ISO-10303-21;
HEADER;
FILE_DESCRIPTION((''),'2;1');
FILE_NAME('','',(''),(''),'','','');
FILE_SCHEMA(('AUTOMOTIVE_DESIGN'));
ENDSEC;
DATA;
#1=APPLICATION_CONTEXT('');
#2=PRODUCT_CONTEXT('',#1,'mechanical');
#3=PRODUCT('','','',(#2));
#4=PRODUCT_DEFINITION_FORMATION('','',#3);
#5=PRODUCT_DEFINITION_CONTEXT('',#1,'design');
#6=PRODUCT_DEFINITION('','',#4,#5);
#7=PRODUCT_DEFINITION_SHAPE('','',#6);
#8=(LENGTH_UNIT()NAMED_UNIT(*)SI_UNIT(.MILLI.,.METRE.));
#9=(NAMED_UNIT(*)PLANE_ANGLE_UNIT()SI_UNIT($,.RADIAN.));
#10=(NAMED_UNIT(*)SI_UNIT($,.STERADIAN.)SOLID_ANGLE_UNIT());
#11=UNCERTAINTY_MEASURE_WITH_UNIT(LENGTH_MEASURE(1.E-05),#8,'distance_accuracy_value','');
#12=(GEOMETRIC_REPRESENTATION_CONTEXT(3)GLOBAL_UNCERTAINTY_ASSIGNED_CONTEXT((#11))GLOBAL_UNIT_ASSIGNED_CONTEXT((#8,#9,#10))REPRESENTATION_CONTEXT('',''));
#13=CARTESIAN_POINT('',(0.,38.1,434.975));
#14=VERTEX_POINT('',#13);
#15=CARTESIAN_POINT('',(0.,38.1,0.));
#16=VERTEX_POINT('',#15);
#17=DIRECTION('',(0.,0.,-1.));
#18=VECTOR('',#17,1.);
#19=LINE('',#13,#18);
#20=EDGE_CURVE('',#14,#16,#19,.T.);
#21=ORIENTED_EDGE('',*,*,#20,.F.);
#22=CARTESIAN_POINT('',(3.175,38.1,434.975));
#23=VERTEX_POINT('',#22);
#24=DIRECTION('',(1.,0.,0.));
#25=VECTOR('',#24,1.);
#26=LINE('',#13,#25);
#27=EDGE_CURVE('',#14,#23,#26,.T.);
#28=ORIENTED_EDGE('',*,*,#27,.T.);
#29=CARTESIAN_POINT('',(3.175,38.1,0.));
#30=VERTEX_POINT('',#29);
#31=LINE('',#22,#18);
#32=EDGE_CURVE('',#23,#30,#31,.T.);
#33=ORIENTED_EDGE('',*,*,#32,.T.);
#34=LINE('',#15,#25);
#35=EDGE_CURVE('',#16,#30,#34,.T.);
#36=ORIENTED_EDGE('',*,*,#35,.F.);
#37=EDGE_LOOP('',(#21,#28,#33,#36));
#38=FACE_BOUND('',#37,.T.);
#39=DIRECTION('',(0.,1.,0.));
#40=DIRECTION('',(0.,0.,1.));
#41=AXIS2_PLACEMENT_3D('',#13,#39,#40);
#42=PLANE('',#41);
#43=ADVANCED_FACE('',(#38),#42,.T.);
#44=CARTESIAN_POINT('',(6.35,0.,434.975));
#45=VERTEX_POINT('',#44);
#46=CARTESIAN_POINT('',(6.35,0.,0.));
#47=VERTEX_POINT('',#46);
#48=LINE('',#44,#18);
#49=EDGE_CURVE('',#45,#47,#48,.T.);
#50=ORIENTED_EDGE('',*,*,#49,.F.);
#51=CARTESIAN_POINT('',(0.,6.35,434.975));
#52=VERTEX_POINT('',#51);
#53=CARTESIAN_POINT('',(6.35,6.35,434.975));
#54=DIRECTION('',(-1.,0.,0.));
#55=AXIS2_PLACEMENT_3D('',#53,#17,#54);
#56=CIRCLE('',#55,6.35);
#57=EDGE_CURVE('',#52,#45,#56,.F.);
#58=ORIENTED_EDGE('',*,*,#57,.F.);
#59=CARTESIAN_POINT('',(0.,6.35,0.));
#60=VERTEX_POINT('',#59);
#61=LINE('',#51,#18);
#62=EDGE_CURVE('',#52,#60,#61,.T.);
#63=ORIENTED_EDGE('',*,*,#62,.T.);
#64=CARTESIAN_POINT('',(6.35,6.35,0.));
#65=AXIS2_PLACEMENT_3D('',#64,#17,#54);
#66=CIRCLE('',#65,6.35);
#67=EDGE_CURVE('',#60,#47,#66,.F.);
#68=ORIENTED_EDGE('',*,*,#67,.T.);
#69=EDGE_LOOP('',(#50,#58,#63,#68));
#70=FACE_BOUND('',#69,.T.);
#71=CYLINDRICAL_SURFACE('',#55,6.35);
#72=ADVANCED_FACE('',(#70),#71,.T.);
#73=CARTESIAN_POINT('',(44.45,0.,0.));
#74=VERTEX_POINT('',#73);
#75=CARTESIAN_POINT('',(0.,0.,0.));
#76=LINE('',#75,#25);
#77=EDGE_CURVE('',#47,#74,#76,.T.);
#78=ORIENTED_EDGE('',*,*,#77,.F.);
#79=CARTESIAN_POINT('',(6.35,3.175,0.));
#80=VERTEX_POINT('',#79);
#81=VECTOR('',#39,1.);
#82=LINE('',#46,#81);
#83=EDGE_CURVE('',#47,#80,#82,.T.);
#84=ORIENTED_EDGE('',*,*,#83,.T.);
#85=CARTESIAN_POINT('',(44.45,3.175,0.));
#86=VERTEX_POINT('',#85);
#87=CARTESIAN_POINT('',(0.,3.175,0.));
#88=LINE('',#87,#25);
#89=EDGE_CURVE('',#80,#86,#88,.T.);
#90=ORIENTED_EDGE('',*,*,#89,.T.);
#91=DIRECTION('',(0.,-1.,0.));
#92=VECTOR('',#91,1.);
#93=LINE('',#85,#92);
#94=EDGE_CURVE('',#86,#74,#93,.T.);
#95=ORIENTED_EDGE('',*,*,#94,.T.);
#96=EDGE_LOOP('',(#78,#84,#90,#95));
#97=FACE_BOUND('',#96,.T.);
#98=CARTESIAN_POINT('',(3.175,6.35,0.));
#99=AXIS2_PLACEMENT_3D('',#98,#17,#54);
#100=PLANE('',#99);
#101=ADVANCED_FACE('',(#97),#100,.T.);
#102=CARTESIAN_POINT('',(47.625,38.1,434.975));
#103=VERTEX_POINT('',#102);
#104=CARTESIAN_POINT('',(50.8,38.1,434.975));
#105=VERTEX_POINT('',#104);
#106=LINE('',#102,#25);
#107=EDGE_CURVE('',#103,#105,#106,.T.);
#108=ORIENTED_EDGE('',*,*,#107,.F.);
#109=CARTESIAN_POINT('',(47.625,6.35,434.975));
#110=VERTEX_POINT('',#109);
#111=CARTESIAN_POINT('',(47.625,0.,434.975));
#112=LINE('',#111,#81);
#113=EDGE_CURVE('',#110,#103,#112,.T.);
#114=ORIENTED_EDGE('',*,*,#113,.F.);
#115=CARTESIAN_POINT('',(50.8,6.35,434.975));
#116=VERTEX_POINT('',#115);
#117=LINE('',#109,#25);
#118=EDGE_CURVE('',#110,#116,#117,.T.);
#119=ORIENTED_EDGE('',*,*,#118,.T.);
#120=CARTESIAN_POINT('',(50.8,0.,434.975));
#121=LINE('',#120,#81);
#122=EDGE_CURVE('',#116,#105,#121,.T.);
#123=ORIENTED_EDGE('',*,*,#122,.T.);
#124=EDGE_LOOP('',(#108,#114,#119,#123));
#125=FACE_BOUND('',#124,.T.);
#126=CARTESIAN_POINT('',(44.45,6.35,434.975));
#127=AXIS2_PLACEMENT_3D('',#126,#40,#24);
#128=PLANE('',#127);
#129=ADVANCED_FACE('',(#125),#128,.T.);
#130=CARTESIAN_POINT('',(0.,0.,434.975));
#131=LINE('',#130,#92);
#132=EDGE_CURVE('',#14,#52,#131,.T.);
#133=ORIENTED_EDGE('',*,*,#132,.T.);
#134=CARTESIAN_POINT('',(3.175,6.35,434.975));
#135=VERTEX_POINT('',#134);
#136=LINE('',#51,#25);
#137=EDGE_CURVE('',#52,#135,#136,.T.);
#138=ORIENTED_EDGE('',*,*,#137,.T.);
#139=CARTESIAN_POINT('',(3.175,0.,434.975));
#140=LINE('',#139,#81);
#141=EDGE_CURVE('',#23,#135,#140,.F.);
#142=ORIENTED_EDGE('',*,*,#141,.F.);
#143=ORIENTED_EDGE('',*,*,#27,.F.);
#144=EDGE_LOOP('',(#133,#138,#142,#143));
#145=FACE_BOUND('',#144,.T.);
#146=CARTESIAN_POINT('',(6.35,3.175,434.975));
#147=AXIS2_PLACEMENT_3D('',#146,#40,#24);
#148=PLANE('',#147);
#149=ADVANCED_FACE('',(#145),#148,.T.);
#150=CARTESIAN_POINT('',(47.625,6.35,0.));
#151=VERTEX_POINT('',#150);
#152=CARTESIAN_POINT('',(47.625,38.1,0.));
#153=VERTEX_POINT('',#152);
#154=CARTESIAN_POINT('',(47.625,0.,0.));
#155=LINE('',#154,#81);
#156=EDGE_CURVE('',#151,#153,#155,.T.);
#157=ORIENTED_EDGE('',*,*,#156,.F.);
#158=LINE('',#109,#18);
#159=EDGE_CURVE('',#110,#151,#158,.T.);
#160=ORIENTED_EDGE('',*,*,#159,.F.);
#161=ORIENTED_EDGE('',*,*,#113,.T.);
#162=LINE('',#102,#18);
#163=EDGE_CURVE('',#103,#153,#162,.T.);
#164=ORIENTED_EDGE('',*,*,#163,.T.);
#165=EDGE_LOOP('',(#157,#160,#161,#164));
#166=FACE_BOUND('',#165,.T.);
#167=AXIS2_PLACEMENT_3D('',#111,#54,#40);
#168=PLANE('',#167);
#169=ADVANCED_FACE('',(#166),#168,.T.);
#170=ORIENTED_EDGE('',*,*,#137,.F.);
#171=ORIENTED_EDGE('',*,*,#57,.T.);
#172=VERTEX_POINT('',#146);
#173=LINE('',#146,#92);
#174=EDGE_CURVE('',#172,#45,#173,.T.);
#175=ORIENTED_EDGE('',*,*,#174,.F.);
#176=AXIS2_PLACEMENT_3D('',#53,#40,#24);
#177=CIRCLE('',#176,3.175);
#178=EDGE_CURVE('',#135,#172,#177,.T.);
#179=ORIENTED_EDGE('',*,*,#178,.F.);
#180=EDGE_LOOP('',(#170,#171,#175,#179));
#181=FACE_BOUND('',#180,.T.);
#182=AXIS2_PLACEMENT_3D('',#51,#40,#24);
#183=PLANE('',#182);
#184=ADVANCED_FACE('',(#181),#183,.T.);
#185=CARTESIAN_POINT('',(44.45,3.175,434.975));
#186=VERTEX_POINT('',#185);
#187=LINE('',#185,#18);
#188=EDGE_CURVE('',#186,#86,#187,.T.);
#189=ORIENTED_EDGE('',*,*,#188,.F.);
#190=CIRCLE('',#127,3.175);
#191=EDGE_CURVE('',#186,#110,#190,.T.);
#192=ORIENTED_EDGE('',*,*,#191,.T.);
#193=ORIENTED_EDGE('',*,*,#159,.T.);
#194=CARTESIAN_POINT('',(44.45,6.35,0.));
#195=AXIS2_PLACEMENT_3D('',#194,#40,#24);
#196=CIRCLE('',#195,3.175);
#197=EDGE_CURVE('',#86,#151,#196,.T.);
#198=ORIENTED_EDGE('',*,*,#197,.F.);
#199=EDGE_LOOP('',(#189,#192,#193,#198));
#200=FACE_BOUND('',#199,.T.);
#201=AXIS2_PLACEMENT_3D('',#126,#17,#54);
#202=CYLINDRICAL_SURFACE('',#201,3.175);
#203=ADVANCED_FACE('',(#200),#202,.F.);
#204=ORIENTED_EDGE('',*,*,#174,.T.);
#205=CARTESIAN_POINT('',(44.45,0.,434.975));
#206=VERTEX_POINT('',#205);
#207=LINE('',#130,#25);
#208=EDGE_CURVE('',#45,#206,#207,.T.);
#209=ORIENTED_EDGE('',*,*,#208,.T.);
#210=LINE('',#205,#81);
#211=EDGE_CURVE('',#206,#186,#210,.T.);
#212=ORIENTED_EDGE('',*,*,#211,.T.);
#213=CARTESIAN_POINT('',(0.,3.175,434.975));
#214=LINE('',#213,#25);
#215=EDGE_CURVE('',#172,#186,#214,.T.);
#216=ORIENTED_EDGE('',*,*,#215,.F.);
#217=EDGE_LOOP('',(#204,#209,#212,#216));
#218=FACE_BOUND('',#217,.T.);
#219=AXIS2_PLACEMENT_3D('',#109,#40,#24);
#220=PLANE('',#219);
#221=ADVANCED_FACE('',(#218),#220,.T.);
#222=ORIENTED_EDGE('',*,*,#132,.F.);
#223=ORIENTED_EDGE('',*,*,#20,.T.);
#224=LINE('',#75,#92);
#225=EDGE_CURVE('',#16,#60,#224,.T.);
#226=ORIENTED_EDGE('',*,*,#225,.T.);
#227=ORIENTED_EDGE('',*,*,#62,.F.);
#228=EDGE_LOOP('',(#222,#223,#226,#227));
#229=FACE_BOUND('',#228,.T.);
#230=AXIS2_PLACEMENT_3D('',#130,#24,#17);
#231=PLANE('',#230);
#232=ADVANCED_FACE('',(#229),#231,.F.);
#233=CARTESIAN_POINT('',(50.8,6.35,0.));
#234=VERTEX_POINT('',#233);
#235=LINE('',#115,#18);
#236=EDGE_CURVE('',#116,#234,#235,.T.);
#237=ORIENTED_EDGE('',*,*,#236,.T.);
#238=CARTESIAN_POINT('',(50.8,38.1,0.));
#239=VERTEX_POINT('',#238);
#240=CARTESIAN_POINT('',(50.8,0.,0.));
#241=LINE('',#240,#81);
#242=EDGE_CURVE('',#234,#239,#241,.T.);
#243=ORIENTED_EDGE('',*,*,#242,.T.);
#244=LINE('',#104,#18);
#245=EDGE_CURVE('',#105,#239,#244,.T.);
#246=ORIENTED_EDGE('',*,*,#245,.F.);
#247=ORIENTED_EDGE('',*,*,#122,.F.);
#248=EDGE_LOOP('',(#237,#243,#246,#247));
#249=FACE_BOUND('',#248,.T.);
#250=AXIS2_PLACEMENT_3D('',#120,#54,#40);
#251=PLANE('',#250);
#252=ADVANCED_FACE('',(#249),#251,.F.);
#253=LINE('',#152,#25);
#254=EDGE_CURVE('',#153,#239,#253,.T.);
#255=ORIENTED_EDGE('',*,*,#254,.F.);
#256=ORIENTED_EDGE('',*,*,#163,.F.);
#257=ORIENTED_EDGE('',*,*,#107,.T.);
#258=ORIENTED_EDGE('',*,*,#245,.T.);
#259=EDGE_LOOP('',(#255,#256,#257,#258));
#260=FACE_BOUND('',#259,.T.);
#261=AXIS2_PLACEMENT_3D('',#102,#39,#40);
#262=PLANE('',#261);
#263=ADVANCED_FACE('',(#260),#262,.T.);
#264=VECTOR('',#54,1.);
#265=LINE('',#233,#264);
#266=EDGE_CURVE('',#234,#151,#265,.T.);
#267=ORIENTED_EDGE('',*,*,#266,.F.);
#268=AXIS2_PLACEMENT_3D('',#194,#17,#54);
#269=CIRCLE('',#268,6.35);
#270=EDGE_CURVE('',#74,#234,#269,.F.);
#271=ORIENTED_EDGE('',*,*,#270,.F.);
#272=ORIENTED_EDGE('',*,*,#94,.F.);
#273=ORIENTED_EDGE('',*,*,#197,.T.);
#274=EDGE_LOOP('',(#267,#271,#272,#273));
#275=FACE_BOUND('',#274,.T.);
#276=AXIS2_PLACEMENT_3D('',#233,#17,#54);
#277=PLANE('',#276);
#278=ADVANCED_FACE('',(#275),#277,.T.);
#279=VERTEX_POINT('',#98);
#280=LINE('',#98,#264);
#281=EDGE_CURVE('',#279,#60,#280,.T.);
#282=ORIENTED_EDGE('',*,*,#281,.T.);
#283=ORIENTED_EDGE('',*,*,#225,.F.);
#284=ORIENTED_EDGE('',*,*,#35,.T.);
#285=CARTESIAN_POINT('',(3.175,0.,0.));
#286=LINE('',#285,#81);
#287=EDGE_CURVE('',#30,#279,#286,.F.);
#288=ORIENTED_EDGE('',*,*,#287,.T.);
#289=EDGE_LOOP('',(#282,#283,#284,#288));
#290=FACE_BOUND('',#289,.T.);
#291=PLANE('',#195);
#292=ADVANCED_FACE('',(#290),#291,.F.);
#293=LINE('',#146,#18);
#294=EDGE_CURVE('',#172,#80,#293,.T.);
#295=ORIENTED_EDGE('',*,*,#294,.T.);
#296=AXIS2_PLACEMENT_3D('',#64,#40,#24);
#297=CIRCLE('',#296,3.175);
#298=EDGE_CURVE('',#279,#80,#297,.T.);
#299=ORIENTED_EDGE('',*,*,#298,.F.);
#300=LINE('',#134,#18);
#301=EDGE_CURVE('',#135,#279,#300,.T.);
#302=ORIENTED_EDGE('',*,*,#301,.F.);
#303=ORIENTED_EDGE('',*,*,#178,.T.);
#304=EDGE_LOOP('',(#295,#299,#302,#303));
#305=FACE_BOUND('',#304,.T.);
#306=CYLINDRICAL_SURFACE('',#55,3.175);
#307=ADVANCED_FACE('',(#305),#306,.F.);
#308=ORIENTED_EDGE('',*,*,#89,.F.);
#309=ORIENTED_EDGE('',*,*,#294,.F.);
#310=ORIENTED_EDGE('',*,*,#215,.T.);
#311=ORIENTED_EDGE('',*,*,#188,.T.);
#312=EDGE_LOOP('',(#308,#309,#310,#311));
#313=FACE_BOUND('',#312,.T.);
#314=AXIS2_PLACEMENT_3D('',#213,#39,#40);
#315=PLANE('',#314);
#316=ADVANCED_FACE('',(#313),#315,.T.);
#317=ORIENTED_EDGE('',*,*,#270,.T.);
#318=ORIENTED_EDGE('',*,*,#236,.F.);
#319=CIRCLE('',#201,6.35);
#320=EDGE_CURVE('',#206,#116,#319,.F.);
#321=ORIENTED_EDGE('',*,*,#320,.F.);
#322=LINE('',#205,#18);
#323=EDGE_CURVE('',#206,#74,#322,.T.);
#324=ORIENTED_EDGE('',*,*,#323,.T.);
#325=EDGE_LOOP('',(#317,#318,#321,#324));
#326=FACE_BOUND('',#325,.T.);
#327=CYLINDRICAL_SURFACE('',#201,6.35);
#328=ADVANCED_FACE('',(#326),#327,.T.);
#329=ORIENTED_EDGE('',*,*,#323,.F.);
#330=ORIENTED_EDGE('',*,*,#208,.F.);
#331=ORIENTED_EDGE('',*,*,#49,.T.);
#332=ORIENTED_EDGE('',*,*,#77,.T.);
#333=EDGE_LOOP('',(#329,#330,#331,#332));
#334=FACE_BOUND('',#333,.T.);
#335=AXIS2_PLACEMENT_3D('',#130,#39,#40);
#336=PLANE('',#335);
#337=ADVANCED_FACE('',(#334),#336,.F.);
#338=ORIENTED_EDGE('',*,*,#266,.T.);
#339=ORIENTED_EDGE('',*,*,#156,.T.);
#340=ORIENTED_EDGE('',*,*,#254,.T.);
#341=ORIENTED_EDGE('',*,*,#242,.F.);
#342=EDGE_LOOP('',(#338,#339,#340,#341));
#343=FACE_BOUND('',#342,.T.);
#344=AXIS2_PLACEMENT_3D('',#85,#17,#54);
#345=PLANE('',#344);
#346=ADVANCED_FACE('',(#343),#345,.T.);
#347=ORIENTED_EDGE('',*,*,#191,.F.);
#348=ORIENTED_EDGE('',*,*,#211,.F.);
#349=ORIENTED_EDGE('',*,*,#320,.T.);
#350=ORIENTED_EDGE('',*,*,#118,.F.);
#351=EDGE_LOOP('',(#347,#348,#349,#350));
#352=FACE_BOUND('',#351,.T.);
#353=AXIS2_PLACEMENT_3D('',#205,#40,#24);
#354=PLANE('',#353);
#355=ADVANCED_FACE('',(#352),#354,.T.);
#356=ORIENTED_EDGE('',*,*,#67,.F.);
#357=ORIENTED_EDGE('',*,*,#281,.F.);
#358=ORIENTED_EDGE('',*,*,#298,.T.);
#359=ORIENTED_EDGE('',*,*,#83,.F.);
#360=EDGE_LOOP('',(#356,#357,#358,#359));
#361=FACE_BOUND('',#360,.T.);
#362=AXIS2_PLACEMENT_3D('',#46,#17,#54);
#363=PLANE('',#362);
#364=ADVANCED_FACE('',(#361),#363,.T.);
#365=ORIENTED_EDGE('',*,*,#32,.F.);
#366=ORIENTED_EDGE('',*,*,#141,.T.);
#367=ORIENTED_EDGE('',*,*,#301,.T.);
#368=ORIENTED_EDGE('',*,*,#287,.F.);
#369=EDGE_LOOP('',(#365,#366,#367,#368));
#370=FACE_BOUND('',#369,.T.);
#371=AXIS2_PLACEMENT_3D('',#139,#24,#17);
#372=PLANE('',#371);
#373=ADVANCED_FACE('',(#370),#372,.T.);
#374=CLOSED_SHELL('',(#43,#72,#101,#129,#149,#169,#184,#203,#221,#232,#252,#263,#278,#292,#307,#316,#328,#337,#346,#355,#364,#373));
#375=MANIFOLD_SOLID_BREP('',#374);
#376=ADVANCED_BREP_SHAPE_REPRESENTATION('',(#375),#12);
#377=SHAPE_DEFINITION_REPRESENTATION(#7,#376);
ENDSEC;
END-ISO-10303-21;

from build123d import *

# Parameters (mm, degrees)
BASE_FLANGE1_DEPTH = 434.975


# Sheet-metal steps are written as plain solids
with BuildPart() as part:
    # Sketch1 → Base-Flange1 (new body)
    with BuildSketch(Plane.XY):
        with BuildLine():
            Line((50.8, 38.1), (50.8, 6.35))
            ThreePointArc((50.8, 6.35), (48.940128061, 1.859871939), (44.45, 0))
            Line((44.45, 0), (6.35, 0))
            ThreePointArc((6.35, 0), (1.859871939, 1.859871939), (0, 6.35))
            Line((0, 6.35), (0, 38.1))
            Line((0, 38.1), (3.175, 38.1))
            Line((3.175, 38.1), (3.175, 6.35))
            ThreePointArc((3.175, 6.35), (4.10493597, 4.10493597), (6.35, 3.175))
            Line((6.35, 3.175), (44.45, 3.175))
            ThreePointArc((44.45, 3.175), (46.69506403, 4.10493597), (47.625, 6.35))
            Line((47.625, 6.35), (47.625, 38.1))
            Line((47.625, 38.1), (50.8, 38.1))
        make_face()
    extrude(amount=BASE_FLANGE1_DEPTH)


solid = part.part
